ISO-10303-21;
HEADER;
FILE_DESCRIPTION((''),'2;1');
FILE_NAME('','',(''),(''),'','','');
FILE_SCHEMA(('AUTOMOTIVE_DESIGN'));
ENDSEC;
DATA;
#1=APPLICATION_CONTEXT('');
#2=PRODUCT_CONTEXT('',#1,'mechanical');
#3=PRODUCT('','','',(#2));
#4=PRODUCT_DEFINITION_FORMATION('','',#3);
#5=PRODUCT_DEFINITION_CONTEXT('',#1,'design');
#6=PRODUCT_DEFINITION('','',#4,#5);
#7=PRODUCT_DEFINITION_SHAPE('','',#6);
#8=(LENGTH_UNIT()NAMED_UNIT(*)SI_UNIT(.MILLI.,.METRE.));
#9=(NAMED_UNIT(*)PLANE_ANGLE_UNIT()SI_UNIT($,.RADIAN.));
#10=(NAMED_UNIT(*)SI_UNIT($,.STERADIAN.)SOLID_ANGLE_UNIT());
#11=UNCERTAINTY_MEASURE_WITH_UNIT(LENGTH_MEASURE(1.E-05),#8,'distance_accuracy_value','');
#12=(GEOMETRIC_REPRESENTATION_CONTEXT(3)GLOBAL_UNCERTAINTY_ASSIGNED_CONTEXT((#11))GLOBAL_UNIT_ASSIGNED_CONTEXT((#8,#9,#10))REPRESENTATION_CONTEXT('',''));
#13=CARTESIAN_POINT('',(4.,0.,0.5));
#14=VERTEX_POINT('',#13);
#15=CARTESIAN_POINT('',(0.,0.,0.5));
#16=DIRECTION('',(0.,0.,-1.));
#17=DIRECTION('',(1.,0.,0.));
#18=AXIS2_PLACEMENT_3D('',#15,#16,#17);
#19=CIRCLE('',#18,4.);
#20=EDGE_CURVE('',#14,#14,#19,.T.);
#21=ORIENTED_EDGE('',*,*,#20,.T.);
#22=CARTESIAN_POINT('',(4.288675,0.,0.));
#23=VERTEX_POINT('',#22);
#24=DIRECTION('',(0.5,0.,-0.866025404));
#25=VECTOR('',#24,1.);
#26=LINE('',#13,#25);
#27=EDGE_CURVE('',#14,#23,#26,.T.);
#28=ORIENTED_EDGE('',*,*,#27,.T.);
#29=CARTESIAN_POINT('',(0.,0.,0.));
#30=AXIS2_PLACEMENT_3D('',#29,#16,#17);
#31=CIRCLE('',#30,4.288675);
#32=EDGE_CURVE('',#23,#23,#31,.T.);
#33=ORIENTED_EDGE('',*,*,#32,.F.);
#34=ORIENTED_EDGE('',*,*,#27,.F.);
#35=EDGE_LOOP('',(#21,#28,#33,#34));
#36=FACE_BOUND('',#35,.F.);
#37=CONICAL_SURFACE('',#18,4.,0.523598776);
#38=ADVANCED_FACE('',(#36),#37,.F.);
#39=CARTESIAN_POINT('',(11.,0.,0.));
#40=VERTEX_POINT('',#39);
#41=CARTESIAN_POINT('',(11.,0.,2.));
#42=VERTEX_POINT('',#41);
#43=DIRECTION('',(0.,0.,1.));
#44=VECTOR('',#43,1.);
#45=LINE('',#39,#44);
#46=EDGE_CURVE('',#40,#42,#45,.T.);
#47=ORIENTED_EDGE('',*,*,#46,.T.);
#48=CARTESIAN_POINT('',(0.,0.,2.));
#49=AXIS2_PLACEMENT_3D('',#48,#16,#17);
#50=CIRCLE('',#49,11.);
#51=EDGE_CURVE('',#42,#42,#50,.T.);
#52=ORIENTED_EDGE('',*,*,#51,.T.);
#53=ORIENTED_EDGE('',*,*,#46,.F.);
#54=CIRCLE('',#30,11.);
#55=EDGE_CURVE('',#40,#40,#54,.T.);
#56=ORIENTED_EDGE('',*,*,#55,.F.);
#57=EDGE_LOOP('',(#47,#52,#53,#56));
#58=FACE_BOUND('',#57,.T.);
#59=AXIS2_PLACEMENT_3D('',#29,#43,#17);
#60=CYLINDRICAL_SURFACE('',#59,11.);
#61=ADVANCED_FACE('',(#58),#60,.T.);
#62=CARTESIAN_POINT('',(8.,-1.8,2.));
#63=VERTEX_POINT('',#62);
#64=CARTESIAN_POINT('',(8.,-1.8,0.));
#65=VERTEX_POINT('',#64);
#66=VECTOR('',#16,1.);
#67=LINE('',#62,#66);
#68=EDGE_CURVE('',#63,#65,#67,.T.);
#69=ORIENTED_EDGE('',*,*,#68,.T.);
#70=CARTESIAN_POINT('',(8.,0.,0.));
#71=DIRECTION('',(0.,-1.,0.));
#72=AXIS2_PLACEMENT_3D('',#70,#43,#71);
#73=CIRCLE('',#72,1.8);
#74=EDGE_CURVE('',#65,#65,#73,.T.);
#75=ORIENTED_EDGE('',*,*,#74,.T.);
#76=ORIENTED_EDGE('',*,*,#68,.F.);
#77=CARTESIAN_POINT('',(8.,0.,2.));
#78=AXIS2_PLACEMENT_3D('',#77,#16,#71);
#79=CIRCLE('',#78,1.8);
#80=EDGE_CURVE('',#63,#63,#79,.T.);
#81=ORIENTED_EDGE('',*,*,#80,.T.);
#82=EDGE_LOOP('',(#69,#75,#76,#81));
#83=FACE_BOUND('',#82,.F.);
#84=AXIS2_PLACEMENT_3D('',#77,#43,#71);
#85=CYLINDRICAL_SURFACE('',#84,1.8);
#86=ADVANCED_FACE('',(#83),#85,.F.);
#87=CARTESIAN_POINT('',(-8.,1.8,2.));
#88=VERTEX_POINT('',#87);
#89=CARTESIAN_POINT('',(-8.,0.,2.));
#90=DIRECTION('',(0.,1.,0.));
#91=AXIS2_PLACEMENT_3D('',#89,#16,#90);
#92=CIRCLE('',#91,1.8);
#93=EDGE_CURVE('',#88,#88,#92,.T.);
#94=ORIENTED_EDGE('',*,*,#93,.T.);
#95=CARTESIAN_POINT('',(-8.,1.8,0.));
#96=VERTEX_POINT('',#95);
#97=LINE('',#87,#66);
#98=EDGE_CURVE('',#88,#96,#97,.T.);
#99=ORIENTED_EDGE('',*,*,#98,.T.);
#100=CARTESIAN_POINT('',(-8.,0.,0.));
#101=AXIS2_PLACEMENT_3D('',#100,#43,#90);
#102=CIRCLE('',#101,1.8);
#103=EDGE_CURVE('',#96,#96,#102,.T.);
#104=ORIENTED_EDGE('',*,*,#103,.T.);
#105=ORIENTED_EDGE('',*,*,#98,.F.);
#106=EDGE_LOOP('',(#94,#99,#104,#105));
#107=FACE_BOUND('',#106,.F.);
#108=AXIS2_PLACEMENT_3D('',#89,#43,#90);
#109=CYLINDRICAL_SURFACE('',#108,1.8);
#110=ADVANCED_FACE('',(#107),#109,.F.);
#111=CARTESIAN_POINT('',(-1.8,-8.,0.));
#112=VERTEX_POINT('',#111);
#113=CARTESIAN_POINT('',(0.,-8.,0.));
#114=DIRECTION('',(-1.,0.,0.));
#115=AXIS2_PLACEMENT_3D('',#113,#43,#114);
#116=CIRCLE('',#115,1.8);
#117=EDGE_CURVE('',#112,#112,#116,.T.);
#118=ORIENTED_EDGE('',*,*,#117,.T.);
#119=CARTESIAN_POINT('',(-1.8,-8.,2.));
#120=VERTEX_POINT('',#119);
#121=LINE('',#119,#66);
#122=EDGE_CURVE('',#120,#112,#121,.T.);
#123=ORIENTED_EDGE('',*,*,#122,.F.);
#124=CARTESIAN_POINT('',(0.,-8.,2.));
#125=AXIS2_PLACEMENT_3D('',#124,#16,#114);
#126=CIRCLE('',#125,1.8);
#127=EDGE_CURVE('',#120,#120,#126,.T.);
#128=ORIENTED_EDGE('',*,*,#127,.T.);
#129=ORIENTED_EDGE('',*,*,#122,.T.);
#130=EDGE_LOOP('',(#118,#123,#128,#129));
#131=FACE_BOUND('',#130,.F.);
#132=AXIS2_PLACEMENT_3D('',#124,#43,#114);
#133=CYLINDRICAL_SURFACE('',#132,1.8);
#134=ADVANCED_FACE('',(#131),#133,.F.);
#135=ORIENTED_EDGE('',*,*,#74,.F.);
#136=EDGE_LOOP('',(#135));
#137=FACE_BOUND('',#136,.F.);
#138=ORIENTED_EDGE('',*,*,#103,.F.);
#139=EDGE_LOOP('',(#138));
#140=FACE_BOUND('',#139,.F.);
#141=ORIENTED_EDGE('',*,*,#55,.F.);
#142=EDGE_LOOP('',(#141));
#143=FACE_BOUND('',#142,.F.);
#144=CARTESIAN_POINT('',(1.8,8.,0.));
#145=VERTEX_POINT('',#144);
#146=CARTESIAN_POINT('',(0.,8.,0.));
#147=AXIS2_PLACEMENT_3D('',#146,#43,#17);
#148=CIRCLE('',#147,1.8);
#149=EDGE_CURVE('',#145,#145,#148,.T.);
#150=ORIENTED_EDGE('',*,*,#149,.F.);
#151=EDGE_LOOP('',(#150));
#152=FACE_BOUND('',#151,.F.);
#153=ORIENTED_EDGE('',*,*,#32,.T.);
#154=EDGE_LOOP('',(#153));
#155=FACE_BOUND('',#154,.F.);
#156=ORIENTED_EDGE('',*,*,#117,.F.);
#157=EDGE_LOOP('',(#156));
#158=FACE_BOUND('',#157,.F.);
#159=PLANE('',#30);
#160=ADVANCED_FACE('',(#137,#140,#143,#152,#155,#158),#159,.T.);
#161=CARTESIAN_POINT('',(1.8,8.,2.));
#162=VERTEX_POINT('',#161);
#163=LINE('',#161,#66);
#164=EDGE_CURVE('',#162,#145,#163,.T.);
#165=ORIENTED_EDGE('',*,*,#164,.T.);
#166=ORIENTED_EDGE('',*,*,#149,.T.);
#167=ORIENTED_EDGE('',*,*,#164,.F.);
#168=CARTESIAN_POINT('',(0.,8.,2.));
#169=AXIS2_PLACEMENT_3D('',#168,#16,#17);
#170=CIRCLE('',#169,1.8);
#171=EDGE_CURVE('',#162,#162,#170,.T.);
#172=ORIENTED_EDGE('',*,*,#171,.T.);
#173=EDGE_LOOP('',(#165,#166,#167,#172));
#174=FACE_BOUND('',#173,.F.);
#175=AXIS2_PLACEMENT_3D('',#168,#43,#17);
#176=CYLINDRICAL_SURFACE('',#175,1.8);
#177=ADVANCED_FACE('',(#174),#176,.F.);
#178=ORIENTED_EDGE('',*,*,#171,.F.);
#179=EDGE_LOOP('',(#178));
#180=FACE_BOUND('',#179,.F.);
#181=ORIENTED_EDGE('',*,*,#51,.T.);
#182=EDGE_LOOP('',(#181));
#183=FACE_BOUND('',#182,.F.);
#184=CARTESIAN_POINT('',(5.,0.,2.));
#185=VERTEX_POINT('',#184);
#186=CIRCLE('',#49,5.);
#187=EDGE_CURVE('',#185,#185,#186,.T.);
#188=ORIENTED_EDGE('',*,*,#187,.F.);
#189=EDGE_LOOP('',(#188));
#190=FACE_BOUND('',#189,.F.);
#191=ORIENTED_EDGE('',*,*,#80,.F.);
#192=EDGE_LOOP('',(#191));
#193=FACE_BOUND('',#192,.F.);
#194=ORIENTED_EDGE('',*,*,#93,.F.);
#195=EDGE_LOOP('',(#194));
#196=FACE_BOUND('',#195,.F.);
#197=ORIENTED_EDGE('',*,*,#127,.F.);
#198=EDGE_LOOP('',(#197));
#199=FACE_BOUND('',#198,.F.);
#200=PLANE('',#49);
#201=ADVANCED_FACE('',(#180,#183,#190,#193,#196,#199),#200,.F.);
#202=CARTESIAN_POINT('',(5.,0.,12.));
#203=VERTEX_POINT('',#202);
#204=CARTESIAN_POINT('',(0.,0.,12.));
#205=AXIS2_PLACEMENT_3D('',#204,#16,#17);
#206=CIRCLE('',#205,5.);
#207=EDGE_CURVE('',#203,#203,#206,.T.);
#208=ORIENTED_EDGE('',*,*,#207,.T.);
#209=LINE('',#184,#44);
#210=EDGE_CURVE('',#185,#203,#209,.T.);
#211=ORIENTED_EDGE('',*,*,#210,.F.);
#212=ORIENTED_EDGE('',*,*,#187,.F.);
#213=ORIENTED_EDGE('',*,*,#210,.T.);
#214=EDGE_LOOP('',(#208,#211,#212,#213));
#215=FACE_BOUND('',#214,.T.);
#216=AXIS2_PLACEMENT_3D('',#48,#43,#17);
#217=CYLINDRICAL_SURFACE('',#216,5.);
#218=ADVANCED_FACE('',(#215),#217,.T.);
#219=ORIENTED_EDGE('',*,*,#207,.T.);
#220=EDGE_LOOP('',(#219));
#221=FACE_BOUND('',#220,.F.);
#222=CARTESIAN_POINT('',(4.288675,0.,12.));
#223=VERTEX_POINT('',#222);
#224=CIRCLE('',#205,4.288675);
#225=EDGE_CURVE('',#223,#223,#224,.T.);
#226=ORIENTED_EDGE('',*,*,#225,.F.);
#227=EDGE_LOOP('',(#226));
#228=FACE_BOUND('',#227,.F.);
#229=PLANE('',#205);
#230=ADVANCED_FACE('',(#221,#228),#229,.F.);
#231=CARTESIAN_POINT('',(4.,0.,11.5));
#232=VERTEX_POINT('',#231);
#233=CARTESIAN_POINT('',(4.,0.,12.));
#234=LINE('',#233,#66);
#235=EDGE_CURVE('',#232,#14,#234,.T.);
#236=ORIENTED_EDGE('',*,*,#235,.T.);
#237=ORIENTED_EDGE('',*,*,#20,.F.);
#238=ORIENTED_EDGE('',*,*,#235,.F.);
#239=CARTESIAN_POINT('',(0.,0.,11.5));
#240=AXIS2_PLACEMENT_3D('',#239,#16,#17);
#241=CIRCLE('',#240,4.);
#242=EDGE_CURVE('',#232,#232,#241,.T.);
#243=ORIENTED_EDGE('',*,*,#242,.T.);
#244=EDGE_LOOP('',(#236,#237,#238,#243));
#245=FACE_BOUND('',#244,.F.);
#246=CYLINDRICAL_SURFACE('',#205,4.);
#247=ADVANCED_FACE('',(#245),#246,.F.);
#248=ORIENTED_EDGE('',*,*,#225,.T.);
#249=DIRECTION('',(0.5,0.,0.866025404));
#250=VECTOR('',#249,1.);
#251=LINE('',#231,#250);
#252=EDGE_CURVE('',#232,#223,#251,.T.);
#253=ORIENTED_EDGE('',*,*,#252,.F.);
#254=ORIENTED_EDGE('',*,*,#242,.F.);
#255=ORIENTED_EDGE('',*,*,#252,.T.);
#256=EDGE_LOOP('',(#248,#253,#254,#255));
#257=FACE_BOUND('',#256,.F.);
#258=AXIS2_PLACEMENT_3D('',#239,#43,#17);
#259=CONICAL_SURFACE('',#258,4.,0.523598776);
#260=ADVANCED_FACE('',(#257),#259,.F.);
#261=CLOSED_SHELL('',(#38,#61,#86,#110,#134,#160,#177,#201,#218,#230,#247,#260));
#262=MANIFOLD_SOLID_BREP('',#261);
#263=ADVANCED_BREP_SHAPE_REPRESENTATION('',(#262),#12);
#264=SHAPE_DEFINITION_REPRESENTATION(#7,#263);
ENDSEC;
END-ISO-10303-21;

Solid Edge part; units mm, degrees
sketch "Sketch1" plane through (0, 0, 0) normal (0, -1, 0) x (1, 0, 0)
  line L0 (4, 12) -> (4, 0)
  line L1 (4, 0) -> (11, 0)
  line L2 (11, 0) -> (11, 2)
  line L3 (11, 2) -> (5, 2)
  line L4 (5, 2) -> (5, 12)
  line L5 (5, 12) -> (4, 12)
  dimension "D1" = 12
  dimension "D2" = 2
revolve "RevolvedProtrusion1" add sketch "Sketch1" angle 360 about axis through (0, 0, 54) along (0, 0, -1)
hole "Hole1" at (8, 0, 2) direction (0, 0, -1) diameter 3.6 end up to next
pattern_circular "Pattern1" count 4 over 360 about axis through (0, 0, 2) along (0, 0, 1) of "Hole1"
chamfer "Chamfer_1" distance 0.5 angle 30 2 edges at (-4, 0, 12) (-4, 0, 0) measured on face at (2.2136, -3.3317, 9.88)
properties material "Stainless steel"
